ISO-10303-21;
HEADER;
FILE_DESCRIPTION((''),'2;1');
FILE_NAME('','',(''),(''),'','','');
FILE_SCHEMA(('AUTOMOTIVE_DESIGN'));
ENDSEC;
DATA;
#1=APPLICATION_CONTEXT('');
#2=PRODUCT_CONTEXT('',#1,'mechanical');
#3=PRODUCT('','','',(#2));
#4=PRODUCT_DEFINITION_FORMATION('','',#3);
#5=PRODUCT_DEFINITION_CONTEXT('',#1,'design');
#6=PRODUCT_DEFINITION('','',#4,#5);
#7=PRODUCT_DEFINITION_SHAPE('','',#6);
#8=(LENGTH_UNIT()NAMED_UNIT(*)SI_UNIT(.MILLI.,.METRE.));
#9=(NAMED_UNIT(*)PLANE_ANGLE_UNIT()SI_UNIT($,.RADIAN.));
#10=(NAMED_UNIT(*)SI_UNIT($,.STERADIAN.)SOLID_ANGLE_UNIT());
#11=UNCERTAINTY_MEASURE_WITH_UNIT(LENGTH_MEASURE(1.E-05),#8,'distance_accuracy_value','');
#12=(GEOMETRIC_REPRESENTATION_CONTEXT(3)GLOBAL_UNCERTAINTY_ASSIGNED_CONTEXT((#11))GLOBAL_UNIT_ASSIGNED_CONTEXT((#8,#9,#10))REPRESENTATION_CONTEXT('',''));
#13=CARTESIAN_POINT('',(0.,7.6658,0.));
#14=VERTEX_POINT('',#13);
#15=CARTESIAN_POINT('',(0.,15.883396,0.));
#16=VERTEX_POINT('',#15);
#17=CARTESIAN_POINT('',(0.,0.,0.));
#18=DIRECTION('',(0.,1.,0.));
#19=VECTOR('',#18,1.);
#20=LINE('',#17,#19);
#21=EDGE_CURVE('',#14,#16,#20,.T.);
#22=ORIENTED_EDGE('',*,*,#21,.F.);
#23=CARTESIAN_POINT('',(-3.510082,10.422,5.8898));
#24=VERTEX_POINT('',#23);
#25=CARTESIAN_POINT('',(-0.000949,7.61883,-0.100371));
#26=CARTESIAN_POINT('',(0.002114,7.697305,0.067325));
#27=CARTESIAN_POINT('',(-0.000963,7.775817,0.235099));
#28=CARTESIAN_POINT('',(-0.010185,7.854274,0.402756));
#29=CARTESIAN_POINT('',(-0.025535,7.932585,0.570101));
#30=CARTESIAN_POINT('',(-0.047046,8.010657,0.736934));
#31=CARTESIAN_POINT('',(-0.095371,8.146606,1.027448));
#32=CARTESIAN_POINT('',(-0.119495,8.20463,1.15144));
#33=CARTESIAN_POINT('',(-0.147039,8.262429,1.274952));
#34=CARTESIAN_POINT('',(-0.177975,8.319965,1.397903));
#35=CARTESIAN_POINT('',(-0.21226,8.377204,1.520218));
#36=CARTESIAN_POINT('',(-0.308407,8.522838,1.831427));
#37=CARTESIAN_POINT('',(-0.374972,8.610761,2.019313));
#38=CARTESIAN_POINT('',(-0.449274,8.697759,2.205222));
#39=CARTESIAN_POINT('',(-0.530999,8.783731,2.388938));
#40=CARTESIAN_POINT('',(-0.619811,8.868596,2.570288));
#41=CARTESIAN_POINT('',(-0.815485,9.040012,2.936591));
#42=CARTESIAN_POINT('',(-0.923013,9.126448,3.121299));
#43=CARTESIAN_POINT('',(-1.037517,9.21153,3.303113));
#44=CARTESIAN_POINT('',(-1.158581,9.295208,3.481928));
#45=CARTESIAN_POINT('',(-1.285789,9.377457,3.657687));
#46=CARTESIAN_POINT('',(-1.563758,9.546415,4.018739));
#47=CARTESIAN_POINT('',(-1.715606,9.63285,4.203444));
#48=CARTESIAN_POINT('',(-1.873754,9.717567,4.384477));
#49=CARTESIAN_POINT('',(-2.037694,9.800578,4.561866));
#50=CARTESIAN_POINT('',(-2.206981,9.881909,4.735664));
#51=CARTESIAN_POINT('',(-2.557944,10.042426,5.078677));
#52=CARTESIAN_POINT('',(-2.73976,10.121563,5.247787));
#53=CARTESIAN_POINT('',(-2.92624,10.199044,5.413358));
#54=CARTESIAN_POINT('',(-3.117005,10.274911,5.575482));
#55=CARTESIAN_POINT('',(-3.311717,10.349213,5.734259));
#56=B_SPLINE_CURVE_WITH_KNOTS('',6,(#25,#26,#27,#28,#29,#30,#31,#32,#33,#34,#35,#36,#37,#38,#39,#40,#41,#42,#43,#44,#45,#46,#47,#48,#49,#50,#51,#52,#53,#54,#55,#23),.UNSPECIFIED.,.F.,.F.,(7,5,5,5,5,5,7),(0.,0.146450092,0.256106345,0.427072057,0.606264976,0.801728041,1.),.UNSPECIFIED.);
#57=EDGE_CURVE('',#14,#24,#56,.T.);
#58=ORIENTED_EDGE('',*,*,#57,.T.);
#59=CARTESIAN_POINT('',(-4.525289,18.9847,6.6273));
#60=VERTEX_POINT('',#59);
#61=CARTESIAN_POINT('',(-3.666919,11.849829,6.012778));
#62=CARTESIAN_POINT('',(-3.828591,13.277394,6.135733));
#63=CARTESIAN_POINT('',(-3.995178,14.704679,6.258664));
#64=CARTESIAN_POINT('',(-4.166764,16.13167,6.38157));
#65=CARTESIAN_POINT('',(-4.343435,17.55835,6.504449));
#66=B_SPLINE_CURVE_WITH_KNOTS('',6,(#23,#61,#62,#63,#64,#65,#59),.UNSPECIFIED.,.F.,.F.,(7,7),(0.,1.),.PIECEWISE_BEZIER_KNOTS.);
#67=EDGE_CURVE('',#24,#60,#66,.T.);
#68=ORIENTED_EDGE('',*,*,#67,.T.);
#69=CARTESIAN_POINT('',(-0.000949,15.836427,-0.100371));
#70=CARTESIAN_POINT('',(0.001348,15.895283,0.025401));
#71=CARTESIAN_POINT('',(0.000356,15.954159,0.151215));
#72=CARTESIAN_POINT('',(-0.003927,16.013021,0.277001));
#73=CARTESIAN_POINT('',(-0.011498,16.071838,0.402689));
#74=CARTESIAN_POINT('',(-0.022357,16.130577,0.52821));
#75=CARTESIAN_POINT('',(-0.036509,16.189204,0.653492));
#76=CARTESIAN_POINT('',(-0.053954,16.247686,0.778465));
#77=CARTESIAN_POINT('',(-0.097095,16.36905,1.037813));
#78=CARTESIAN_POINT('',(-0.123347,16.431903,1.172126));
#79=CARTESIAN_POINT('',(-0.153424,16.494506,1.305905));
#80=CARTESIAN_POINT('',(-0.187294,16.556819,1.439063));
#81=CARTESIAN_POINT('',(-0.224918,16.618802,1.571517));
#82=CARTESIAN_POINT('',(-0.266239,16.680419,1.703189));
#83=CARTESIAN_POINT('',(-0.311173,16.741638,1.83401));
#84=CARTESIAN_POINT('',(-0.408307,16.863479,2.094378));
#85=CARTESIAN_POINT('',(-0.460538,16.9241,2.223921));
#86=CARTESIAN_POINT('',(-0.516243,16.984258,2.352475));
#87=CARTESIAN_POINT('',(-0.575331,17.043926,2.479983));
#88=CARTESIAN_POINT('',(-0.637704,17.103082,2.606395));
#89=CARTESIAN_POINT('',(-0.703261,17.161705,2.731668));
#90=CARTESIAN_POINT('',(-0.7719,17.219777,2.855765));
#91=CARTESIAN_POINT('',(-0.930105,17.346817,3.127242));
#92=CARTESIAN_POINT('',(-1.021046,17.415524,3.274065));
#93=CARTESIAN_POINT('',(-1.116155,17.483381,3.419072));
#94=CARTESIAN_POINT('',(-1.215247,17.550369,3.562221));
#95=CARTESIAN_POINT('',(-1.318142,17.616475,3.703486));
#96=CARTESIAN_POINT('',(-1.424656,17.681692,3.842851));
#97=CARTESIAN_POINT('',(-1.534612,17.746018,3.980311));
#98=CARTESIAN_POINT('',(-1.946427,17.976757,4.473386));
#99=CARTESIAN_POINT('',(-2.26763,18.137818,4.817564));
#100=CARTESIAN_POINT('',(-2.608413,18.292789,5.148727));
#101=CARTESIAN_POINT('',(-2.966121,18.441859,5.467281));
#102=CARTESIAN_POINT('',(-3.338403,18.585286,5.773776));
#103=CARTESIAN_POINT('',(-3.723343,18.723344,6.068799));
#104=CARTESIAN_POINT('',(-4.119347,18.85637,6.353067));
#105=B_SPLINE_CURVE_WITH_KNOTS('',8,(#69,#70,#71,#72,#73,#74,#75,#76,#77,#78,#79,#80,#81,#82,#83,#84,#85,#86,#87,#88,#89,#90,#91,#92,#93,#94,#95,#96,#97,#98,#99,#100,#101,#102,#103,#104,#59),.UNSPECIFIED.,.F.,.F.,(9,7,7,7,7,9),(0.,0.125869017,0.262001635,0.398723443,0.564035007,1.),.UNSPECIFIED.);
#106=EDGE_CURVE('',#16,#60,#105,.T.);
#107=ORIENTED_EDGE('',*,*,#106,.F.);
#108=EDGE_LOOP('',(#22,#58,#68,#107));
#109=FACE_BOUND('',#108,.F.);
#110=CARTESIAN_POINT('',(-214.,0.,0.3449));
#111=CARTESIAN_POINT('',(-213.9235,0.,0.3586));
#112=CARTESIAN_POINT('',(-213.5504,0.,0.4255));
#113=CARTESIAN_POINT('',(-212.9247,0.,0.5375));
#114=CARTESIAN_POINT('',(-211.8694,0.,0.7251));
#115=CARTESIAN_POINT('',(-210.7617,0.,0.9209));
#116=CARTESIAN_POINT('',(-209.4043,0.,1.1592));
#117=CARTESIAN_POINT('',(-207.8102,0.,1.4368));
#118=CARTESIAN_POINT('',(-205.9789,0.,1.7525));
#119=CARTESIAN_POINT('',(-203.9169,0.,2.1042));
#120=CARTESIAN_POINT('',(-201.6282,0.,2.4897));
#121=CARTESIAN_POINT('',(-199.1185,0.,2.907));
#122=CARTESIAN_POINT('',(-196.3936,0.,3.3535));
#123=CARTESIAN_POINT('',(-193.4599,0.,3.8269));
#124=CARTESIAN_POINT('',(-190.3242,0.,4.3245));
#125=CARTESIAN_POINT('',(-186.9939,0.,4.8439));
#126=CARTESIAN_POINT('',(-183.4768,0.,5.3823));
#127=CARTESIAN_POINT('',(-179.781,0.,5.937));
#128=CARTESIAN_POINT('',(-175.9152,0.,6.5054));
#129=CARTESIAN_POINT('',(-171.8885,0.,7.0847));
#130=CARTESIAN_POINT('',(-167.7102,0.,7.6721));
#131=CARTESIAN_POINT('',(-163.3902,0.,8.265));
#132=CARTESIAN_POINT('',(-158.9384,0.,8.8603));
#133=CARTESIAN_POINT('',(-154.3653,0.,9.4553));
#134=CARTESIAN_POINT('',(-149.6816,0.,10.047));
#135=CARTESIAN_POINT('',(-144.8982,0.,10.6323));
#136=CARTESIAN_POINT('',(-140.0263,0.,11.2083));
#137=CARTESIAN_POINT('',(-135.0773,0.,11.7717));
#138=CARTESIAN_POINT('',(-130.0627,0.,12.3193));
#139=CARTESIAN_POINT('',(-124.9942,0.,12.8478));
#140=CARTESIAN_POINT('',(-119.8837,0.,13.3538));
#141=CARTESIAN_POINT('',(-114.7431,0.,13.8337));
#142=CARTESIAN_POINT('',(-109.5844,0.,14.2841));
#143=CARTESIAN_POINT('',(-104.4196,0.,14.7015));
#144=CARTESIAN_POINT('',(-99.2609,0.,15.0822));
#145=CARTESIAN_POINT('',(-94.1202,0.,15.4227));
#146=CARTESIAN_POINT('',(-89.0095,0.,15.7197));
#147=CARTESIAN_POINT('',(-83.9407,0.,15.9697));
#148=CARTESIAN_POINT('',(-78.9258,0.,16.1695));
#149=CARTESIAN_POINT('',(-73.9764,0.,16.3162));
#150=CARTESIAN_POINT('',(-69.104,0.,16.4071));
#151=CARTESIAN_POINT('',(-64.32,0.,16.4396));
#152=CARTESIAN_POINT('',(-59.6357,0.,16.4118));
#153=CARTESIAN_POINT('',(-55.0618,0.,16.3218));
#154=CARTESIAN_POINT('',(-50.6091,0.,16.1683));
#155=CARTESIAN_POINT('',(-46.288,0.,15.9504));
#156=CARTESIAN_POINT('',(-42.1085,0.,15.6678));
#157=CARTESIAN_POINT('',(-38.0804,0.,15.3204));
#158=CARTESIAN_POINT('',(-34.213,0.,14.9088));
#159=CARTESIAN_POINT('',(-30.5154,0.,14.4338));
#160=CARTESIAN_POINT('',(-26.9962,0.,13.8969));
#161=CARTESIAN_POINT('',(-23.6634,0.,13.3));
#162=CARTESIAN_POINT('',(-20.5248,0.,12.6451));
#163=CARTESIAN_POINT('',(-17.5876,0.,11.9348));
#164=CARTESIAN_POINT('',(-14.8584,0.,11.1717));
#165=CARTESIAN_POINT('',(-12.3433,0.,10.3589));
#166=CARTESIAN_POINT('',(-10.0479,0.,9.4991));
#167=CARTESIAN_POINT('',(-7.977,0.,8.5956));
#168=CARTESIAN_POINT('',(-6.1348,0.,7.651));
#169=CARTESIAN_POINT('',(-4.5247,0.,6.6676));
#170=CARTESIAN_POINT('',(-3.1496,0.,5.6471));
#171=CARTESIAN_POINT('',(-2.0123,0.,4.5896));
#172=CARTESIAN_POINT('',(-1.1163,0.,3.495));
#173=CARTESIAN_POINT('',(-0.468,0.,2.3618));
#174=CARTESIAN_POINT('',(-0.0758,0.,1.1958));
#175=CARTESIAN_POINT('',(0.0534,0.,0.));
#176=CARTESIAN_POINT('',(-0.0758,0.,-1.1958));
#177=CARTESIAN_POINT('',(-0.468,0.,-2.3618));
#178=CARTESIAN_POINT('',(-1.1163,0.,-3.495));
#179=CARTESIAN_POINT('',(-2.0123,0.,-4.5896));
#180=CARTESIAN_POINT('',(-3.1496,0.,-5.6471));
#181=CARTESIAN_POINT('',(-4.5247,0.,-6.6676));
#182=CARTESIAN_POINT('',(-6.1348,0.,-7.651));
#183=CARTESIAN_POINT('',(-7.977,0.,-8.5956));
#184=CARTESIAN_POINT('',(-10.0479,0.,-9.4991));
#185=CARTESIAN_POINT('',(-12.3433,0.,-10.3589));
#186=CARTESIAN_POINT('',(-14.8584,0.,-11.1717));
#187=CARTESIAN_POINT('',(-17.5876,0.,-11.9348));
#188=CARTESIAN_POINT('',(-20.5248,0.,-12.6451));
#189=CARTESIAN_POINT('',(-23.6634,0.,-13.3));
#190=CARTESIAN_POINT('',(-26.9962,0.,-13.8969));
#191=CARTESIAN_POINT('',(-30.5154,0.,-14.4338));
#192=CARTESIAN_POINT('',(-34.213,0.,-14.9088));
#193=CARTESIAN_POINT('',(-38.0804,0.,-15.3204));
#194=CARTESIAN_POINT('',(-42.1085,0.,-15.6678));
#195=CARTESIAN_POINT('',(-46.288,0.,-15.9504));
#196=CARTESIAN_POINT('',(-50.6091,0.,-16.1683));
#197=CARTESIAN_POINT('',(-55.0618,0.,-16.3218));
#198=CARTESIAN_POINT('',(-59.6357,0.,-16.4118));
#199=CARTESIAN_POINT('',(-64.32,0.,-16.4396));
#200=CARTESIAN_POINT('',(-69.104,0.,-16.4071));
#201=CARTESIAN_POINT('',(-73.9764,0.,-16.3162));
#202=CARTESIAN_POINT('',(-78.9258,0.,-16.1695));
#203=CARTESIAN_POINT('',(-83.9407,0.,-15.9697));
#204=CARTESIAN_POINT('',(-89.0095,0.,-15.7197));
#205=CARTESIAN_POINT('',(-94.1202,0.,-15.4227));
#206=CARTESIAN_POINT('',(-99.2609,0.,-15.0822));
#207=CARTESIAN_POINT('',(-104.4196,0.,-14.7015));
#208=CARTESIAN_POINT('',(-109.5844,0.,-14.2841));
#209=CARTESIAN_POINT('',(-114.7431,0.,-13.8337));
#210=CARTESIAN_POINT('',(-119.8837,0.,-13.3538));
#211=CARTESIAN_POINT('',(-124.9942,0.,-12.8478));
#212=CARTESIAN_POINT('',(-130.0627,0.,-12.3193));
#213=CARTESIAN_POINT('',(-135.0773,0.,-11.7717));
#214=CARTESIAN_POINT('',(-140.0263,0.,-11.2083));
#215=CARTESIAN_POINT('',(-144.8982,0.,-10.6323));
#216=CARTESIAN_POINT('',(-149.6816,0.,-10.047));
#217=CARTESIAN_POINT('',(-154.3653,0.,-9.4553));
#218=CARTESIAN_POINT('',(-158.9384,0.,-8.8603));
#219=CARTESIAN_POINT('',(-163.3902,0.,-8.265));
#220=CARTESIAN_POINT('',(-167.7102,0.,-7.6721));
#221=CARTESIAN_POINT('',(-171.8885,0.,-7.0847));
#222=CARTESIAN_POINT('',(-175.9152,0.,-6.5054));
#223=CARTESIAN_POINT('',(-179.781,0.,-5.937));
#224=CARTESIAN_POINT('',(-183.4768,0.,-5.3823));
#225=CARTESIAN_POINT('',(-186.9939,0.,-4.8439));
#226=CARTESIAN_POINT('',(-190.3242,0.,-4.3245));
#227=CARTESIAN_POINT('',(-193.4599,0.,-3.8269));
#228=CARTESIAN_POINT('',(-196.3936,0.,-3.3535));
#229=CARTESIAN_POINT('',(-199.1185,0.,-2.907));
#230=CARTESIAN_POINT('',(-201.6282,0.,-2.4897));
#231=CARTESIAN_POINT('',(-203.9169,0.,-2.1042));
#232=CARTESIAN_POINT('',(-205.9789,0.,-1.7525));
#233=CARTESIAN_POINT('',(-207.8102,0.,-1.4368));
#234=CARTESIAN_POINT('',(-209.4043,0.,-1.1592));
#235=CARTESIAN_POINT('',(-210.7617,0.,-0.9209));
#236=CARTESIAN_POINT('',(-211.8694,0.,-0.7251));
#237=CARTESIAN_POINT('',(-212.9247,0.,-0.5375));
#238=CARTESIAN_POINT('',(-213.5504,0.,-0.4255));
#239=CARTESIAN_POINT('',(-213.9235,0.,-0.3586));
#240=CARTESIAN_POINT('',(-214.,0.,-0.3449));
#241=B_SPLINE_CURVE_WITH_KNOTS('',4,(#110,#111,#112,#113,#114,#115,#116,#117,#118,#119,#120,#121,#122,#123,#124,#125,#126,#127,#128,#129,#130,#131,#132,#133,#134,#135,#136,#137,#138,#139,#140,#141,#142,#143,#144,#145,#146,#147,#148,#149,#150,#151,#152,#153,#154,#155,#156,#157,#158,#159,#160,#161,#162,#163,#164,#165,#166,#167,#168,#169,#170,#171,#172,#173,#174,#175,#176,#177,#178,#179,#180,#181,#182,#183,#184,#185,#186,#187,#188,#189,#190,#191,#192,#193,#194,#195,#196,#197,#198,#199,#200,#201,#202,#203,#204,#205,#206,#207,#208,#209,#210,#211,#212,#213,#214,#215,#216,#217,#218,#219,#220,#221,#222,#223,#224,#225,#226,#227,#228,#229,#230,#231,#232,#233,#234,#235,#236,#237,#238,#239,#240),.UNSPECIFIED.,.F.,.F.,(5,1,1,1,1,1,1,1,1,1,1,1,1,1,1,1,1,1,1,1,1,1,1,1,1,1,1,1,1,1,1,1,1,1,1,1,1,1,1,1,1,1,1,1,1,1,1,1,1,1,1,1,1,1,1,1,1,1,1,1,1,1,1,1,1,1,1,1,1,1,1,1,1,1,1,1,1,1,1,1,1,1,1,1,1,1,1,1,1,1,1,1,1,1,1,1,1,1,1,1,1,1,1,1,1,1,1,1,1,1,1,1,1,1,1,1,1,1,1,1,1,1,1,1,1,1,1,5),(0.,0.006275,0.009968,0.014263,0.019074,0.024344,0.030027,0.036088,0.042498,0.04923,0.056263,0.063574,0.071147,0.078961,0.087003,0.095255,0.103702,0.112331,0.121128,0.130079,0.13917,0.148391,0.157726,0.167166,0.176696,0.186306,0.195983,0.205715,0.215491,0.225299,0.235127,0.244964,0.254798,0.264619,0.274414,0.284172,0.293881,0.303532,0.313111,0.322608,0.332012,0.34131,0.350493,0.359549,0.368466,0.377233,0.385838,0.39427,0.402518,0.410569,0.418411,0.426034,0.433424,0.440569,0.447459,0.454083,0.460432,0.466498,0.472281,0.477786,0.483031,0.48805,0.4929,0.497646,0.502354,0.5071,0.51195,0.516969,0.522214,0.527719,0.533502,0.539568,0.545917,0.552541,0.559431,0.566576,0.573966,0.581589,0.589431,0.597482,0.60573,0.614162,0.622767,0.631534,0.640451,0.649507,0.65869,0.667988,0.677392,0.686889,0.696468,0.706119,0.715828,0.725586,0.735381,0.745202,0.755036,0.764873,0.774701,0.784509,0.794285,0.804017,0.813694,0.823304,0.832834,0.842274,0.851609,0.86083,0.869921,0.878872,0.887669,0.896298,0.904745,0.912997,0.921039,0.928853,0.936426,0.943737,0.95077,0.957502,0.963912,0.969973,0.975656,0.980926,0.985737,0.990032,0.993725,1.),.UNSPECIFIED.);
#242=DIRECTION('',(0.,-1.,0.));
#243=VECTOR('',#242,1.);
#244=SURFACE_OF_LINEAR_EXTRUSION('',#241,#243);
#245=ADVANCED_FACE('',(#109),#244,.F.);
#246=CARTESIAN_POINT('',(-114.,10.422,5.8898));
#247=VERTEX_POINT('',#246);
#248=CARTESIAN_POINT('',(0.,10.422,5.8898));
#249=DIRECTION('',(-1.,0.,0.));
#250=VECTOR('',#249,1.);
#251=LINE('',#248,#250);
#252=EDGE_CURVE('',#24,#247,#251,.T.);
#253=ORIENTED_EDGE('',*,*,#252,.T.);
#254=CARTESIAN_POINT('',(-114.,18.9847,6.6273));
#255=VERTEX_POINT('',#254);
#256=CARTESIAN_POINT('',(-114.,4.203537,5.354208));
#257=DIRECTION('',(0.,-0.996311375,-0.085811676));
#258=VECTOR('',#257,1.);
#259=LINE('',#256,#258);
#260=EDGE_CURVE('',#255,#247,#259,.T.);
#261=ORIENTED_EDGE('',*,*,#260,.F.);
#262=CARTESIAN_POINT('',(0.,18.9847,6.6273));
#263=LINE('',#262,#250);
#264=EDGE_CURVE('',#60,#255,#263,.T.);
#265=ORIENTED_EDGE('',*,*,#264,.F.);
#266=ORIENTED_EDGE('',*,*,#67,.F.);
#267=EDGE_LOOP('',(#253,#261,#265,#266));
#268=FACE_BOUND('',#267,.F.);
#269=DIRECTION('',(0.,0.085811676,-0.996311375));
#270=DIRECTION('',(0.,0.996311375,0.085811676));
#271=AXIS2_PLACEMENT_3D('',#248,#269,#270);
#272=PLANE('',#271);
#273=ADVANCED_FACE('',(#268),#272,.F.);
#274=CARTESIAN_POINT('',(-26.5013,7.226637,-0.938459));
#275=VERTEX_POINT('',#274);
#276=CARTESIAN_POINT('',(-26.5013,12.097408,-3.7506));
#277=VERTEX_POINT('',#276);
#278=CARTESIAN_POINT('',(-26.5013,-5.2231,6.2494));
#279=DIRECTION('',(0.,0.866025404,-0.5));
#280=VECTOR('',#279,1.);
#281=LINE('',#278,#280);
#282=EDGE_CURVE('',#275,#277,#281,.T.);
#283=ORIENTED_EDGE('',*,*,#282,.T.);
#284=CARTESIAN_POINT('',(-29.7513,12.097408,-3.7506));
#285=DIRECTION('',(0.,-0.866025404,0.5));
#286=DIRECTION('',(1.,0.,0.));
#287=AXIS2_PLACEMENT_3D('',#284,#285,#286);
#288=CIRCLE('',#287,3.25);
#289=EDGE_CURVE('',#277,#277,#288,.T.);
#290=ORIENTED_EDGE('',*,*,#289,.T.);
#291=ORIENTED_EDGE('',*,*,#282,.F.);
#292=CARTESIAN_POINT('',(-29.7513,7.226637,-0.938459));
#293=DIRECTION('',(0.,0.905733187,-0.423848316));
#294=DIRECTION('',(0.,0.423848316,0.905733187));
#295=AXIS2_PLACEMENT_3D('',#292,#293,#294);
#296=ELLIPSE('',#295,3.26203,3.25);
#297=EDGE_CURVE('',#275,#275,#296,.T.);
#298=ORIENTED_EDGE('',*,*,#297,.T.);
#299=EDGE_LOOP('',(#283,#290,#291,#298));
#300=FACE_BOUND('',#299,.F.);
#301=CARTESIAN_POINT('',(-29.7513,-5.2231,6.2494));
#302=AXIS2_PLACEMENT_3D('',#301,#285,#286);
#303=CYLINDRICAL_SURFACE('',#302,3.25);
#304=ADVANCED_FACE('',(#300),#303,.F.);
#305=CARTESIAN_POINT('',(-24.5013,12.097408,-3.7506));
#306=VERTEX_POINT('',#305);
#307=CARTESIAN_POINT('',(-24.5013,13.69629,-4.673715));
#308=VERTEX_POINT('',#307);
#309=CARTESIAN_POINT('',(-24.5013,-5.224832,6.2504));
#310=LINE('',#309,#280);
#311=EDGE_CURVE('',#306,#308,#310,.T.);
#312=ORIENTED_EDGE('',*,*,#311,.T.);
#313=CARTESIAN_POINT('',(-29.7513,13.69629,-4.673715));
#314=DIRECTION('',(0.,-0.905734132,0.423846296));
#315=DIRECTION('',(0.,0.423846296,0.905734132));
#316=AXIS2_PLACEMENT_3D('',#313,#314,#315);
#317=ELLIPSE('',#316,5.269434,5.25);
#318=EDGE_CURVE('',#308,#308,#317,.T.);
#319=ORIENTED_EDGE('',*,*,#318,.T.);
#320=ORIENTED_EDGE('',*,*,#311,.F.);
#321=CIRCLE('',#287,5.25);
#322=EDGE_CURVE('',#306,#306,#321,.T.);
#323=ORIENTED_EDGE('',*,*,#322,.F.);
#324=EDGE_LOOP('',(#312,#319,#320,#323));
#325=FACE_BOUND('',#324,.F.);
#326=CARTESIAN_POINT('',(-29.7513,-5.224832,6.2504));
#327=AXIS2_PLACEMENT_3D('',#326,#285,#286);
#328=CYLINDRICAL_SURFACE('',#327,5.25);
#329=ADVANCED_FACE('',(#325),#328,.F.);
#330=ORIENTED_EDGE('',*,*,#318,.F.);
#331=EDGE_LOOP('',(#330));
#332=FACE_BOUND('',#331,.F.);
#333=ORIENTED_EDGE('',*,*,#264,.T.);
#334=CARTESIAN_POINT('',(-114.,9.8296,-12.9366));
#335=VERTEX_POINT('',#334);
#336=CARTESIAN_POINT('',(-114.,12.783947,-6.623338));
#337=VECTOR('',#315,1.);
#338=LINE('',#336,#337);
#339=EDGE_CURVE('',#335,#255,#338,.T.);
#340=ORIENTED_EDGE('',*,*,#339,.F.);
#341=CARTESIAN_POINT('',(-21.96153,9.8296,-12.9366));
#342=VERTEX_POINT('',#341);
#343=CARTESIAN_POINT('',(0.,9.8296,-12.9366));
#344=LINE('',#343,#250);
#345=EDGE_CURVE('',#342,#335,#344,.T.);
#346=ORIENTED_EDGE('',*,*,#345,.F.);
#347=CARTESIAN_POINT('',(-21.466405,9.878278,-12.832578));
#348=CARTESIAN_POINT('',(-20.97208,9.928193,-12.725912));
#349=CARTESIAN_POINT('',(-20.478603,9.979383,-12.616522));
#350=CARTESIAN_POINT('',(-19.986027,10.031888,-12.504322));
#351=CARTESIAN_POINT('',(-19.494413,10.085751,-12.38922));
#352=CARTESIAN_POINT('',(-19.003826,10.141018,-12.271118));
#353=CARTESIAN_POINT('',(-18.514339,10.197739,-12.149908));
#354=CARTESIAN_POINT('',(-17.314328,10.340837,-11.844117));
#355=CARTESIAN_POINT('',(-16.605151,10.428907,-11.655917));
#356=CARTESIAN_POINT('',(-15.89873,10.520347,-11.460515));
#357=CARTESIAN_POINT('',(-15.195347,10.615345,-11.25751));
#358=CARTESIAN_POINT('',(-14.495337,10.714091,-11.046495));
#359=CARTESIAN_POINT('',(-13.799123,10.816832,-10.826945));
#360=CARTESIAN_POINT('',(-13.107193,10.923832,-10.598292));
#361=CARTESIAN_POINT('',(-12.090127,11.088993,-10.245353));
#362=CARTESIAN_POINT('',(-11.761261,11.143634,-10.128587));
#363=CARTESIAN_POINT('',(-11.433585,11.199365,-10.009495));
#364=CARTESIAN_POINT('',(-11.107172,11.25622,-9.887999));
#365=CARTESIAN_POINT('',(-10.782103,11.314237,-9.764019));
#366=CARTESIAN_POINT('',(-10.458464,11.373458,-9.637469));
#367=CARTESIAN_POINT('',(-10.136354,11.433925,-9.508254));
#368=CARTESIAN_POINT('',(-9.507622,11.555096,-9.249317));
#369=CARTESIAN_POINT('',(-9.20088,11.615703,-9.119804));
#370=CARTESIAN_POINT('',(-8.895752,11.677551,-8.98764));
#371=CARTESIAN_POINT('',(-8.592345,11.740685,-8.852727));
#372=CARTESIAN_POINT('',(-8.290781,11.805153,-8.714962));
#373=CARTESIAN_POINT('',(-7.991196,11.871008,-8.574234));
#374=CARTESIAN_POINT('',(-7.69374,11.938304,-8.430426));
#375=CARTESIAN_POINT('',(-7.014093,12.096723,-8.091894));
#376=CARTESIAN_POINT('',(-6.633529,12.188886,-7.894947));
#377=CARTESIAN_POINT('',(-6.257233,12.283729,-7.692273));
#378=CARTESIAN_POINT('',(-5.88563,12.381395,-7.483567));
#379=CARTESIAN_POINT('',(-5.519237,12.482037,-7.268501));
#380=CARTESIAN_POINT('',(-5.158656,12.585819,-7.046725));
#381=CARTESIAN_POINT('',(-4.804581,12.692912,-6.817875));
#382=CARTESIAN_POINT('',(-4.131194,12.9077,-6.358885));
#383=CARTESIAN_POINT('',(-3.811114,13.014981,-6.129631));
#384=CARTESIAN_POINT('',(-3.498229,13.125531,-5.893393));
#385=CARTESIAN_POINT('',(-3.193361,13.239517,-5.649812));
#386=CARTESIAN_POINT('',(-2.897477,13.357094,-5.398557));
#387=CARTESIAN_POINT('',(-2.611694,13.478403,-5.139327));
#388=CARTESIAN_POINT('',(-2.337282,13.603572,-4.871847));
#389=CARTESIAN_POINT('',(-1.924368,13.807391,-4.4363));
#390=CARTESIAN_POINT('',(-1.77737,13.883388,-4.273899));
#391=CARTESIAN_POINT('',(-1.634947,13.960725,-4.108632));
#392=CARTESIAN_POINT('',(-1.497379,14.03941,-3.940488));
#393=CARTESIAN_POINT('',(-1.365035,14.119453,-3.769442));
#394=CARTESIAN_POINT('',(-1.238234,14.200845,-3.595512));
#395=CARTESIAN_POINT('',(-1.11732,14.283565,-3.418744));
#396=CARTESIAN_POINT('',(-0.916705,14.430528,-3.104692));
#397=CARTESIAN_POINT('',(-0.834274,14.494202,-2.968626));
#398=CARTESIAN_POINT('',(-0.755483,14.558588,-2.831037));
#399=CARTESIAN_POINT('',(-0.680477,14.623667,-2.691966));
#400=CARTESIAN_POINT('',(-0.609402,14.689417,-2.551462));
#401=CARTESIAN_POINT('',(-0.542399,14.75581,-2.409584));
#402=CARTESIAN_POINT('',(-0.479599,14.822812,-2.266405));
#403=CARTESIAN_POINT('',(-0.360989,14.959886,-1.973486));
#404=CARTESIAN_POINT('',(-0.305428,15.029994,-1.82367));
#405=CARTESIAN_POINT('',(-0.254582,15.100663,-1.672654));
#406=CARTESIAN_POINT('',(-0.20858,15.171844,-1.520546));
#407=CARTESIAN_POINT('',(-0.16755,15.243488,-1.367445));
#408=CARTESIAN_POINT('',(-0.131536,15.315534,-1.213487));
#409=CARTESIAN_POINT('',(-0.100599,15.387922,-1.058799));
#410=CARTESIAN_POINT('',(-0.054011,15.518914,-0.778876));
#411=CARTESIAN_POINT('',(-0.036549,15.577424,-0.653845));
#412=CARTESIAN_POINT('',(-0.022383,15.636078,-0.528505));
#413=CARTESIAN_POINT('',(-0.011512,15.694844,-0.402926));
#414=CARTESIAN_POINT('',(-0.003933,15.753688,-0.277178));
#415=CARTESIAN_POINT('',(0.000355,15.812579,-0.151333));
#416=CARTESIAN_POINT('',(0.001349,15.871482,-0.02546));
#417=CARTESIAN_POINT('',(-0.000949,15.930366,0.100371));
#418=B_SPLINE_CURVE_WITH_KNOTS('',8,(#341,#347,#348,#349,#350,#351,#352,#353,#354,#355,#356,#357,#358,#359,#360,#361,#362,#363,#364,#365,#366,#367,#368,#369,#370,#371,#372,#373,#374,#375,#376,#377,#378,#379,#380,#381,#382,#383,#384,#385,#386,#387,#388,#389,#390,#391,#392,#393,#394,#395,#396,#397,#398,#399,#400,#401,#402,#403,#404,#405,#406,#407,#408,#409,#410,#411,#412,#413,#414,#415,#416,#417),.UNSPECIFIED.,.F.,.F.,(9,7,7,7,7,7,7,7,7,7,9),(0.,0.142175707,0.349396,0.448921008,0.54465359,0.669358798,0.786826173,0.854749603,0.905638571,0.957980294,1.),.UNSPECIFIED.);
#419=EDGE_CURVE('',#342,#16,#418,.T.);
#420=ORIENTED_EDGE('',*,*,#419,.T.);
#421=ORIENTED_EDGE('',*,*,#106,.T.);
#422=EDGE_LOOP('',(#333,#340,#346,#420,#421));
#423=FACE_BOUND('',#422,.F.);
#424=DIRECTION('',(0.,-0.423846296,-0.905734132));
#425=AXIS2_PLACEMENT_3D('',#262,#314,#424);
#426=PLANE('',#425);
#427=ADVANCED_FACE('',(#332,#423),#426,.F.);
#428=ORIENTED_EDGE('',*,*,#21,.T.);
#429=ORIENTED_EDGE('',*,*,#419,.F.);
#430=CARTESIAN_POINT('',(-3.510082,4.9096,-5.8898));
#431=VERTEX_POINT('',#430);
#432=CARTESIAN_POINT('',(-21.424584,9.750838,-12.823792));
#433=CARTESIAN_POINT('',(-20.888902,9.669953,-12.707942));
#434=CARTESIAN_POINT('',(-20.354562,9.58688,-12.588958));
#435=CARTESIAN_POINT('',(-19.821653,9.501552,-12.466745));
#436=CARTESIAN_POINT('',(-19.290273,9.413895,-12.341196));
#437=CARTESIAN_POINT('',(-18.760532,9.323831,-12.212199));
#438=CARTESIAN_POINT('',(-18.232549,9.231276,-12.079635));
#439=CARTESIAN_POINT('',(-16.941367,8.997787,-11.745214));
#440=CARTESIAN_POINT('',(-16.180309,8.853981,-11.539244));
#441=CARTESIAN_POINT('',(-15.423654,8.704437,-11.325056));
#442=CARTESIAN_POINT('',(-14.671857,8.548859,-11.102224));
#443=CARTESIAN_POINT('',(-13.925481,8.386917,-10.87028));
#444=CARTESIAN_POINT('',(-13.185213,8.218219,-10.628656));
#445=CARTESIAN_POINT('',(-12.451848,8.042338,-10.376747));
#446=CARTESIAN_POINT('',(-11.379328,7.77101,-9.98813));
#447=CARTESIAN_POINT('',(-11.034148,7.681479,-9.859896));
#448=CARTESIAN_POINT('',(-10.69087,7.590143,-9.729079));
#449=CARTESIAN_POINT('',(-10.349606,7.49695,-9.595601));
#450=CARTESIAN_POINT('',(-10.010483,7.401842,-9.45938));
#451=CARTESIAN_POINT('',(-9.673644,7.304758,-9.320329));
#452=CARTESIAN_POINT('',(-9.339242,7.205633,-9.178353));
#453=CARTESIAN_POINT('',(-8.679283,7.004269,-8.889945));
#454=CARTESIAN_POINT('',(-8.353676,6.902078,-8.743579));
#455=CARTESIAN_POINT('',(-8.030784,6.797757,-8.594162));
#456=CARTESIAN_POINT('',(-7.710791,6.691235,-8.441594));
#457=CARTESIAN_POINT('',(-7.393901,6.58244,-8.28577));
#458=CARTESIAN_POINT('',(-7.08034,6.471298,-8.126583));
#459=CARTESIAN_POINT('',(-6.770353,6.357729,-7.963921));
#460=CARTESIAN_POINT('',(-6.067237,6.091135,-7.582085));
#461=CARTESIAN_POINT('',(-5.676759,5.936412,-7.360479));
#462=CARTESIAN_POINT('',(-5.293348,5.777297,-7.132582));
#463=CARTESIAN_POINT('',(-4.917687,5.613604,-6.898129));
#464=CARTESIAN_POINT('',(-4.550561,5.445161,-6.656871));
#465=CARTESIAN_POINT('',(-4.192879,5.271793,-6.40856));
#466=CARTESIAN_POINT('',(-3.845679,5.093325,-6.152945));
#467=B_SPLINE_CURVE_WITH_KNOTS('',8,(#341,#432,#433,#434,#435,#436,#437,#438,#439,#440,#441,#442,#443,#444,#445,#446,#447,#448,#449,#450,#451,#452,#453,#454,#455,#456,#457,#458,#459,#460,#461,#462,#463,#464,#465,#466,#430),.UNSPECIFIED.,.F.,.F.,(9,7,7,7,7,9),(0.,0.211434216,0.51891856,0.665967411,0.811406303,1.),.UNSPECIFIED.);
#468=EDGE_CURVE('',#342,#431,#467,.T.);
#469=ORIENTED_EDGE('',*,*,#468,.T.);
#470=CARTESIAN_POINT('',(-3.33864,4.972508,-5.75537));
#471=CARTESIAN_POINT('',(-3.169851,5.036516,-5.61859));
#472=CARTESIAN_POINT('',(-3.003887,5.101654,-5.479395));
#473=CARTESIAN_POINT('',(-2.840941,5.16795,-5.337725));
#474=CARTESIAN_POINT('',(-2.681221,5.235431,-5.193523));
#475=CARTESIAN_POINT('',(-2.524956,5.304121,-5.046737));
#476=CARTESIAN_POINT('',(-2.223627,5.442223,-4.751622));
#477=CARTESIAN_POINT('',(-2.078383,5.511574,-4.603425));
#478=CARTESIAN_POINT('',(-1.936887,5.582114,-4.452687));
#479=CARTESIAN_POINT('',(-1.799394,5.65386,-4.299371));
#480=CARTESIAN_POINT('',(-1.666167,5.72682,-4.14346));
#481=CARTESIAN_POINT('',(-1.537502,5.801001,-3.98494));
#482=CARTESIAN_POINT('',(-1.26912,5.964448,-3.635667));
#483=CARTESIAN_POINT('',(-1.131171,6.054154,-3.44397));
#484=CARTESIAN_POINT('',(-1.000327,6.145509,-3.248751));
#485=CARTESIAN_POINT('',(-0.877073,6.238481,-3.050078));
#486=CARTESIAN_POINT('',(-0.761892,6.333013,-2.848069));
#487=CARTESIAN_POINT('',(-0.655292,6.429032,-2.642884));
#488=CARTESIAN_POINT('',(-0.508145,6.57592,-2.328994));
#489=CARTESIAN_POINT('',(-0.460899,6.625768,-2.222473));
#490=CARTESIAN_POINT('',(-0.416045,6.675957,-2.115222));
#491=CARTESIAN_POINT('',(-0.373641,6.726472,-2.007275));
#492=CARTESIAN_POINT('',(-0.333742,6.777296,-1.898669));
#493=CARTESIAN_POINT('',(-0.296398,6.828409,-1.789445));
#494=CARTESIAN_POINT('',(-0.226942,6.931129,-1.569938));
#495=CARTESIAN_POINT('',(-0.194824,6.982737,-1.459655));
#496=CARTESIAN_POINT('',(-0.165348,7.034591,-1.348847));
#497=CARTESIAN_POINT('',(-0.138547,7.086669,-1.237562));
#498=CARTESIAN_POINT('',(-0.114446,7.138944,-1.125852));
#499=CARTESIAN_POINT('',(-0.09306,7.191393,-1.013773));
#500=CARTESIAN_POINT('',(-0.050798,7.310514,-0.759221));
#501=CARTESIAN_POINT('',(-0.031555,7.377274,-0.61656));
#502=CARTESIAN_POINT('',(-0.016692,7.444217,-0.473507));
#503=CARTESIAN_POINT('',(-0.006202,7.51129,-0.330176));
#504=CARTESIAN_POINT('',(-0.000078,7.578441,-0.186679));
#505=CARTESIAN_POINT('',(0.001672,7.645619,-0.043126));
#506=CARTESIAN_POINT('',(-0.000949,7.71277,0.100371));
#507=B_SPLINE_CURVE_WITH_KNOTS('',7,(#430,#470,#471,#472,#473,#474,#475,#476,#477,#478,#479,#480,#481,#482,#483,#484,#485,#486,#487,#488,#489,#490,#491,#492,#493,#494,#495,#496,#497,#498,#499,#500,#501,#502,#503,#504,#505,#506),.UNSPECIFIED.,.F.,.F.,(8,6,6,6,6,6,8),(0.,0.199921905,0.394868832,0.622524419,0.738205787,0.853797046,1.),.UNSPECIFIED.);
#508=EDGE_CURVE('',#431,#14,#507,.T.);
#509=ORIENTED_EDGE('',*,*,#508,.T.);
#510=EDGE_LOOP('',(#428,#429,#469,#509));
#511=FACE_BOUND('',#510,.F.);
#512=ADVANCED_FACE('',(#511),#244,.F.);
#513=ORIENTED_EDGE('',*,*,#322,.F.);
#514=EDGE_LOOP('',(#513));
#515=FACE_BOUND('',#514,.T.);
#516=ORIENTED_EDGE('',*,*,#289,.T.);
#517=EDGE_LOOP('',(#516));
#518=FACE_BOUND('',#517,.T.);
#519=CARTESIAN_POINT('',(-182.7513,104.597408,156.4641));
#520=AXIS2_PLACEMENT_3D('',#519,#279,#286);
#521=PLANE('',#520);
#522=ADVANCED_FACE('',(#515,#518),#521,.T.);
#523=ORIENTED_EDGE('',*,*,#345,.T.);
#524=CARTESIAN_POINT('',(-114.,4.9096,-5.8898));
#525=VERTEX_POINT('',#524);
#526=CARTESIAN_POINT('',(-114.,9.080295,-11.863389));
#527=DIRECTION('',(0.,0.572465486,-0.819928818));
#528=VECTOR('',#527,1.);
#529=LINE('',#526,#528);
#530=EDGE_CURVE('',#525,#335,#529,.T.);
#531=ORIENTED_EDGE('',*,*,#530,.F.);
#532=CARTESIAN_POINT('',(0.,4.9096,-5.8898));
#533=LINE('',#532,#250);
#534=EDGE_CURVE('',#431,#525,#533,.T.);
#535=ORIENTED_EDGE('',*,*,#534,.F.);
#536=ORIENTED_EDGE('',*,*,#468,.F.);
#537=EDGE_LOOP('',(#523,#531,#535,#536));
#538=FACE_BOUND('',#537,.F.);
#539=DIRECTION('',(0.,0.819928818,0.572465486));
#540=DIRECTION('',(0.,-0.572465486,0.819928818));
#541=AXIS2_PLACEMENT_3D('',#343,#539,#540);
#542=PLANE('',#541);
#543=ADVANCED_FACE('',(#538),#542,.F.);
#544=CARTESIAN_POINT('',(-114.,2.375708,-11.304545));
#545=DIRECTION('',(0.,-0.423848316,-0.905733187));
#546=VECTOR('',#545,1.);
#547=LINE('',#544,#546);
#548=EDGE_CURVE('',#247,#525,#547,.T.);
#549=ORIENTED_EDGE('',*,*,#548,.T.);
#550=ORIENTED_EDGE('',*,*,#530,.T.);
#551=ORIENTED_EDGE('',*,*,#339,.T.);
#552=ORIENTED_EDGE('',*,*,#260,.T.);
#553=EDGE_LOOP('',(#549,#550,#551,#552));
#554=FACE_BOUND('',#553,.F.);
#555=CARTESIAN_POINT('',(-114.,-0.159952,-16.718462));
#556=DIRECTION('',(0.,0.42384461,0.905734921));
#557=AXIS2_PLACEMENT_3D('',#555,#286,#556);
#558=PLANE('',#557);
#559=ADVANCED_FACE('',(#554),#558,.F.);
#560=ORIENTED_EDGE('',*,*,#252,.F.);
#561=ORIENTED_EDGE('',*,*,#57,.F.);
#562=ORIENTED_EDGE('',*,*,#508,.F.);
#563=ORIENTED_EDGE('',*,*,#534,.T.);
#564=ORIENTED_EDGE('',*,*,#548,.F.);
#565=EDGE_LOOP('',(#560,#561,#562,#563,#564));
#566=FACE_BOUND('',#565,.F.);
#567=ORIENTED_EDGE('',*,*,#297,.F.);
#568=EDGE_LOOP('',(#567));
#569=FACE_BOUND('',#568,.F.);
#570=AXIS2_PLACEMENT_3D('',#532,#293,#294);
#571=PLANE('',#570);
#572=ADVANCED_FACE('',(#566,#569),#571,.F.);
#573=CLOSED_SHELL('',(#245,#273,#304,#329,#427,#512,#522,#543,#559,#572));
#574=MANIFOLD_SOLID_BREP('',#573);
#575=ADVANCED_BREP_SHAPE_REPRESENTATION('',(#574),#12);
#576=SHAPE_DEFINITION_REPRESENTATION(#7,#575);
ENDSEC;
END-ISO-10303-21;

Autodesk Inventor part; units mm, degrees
sketch "Sketch5" plane through (0, 0, 0) normal (0, 1, 0) x (-1, 0, 0)
  spline S0 degree 4 poles (214, 0.3449) (213.9235, 0.3586) (213.5504, 0.4255) (212.9247, 0.5375) (211.8694, 0.7251) (210.7617, 0.9209) (209.4043, 1.1592) (207.8102, 1.4368) (205.9789, 1.7525) (203.9169, 2.1042) (201.6282, 2.4897) (199.1185, 2.907) (196.3936, 3.3535) (193.4599, 3.8269) (190.3242, 4.3245) (186.9939, 4.8439) (183.4768, 5.3823) (179.781, 5.937) (175.9152, 6.5054) (171.8885, 7.0847) (167.7102, 7.6721) (163.3902, 8.265) (158.9384, 8.8603) (154.3653, 9.4553) (149.6816, 10.047) (144.8982, 10.6323) (140.0263, 11.2083) (135.0773, 11.7717) (130.0627, 12.3193) (124.9942, 12.8478) (119.8837, 13.3538) (114.7431, 13.8337) (109.5844, 14.2841) (104.4196, 14.7015) (99.2609, 15.0822) (94.1202, 15.4227) (89.0095, 15.7197) (83.9407, 15.9697) (78.9258, 16.1695) (73.9764, 16.3162) (69.104, 16.4071) (64.32, 16.4396) (59.6357, 16.4118) (55.0618, 16.3218) (50.6091, 16.1683) (46.288, 15.9504) (42.1085, 15.6678) (38.0804, 15.3204) (34.213, 14.9088) (30.5154, 14.4338) (26.9962, 13.8969) (23.6634, 13.3) (20.5248, 12.6451) (17.5876, 11.9348) (14.8584, 11.1717) (12.3433, 10.3589) (10.0479, 9.4991) (7.977, 8.5956) (6.1348, 7.651) (4.5247, 6.6676) (3.1496, 5.6471) (2.0123, 4.5896) (1.1163, 3.495) (0.468, 2.3618) (0.0758, 1.1958) (-0.0534, 0) (0.0758, -1.1958) (0.468, -2.3618) (1.1163, -3.495) (2.0123, -4.5896) (3.1496, -5.6471) (4.5247, -6.6676) (6.1348, -7.651) (7.977, -8.5956) (10.0479, -9.4991) (12.3433, -10.3589) (14.8584, -11.1717) (17.5876, -11.9348) (20.5248, -12.6451) (23.6634, -13.3) (26.9962, -13.8969) (30.5154, -14.4338) (34.213, -14.9088) (38.0804, -15.3204) (42.1085, -15.6678) (46.288, -15.9504) (50.6091, -16.1683) (55.0618, -16.3218) (59.6357, -16.4118) (64.32, -16.4396) (69.104, -16.4071) (73.9764, -16.3162) (78.9258, -16.1695) (83.9407, -15.9697) (89.0095, -15.7197) (94.1202, -15.4227) (99.2609, -15.0822) (104.4196, -14.7015) (109.5844, -14.2841) (114.7431, -13.8337) (119.8837, -13.3538) (124.9942, -12.8478) (130.0627, -12.3193) (135.0773, -11.7717) (140.0263, -11.2083) (144.8982, -10.6323) (149.6816, -10.047) (154.3653, -9.4553) (158.9384, -8.8603) (163.3902, -8.265) (167.7102, -7.6721) (171.8885, -7.0847) (175.9152, -6.5054) (179.781, -5.937) (183.4768, -5.3823) (186.9939, -4.8439) (190.3242, -4.3245) (193.4599, -3.8269) (196.3936, -3.3535) (199.1185, -2.907) (201.6282, -2.4897) (203.9169, -2.1042) (205.9789, -1.7525) (207.8102, -1.4368) (209.4043, -1.1592) (210.7617, -0.9209) (211.8694, -0.7251) (212.9247, -0.5375) (213.5504, -0.4255) (213.9235, -0.3586) (214, -0.3449) knots 0 0 0 0 0 0.006275 0.009968 0.014263 0.019074 0.024344 0.030027 0.036088 0.042498 0.04923 0.056263 0.063574 0.071147 0.078961 0.087003 0.095255 0.103702 0.112331 0.121128 0.130079 0.13917 0.148391 0.157726 0.167166 0.176696 0.186306 0.195983 0.205715 0.215491 0.225299 0.235127 0.244964 0.254798 0.264619 0.274414 0.284172 0.293881 0.303532 0.313111 0.322608 0.332012 0.34131 0.350493 0.359549 0.368466 0.377233 0.385838 0.39427 0.402518 0.410569 0.418411 0.426034 0.433424 0.440569 0.447459 0.454083 0.460432 0.466498 0.472281 0.477786 0.483031 0.48805 0.4929 0.497646 0.502354 0.5071 0.51195 0.516969 0.522214 0.527719 0.533502 0.539568 0.545917 0.552541 0.559431 0.566576 0.573966 0.581589 0.589431 0.597482 0.60573 0.614162 0.622767 0.631534 0.640451 0.649507 0.65869 0.667988 0.677392 0.686889 0.696468 0.706119 0.715828 0.725586 0.735381 0.745202 0.755036 0.764873 0.774701 0.784509 0.794285 0.804017 0.813694 0.823304 0.832834 0.842274 0.851609 0.86083 0.869921 0.878872 0.887669 0.896298 0.904745 0.912997 0.921039 0.928853 0.936426 0.943737 0.95077 0.957502 0.963912 0.969973 0.975656 0.980926 0.985737 0.990032 0.993725 1 1 1 1 1
  line L0 (204.525, -2) -> (204.525, 2)
  line L1 (204.525, 0) -> (0, 0)
  line L2 (0, 0) -> (61.2, 0)
  line L3 (61.2, 0) -> (61.2, -16.415)
  line L4 (61.2, -16.415) -> (61.2, 16.415)
  point P0 (0, 0)
  point P1 (213.875, 0.3673)
  point P2 (213.5005, 0.4344)
  point P3 (212.8772, 0.5457)
  point P4 (212.0066, 0.7006)
  point P5 (210.8908, 0.8979)
  point P6 (209.5323, 1.1364)
  point P7 (207.9344, 1.4146)
  point P8 (206.1007, 1.7309)
  point P9 (204.0356, 2.0831)
  point P10 (201.7438, 2.4693)
  point P11 (199.2308, 2.8872)
  point P12 (196.5023, 3.3344)
  point P13 (193.5648, 3.8084)
  point P14 (190.4252, 4.3068)
  point P15 (187.0907, 4.8269)
  point P16 (183.5691, 5.366)
  point P17 (179.8687, 5.9215)
  point P18 (175.9981, 6.4907)
  point P19 (171.9664, 7.0708)
  point P20 (167.7829, 7.6591)
  point P21 (163.4575, 8.2526)
  point P22 (159.0002, 8.8488)
  point P23 (154.4215, 9.4444)
  point P24 (149.732, 10.0368)
  point P25 (144.9427, 10.6228)
  point P26 (140.0648, 11.1993)
  point P27 (135.1097, 11.7633)
  point P28 (130.0889, 12.3114)
  point P29 (125.0142, 12.8402)
  point P30 (119.8974, 13.3464)
  point P31 (114.7505, 13.8266)
  point P32 (109.5855, 14.2771)
  point P33 (104.4145, 14.6943)
  point P34 (99.2495, 15.0749)
  point P35 (94.1026, 15.4151)
  point P36 (88.9858, 15.7116)
  point P37 (83.9111, 15.961)
  point P38 (78.8903, 16.1601)
  point P39 (73.9352, 16.306)
  point P40 (69.0573, 16.3958)
  point P41 (64.268, 16.4271)
  point P42 (59.5785, 16.3978)
  point P43 (54.9998, 16.3062)
  point P44 (50.5425, 16.1509)
  point P45 (46.2171, 15.931)
  point P46 (42.0336, 15.6461)
  point P47 (38.0019, 15.2962)
  point P48 (34.1313, 14.8818)
  point P49 (30.4309, 14.4038)
  point P50 (26.9093, 13.8636)
  point P51 (23.5748, 13.2629)
  point P52 (20.4352, 12.6039)
  point P53 (17.4977, 11.889)
  point P54 (14.7693, 11.1209)
  point P55 (12.2562, 10.3027)
  point P56 (9.9644, 9.4372)
  point P57 (7.8993, 8.5276)
  point P58 (6.0656, 7.5769)
  point P59 (4.4677, 6.5883)
  point P60 (3.1092, 5.5644)
  point P61 (1.9934, 4.5081)
  point P62 (1.1228, 3.4216)
  point P63 (0.4995, 2.307)
  point P64 (0.125, 1.1661)
  point P65 (0.125, -1.1661)
  point P66 (0.4995, -2.307)
  point P67 (1.1228, -3.4216)
  point P68 (1.9934, -4.5081)
  point P69 (3.1092, -5.5644)
  point P70 (4.4677, -6.5883)
  point P71 (6.0656, -7.5769)
  point P72 (7.8993, -8.5276)
  point P73 (9.9644, -9.4372)
  point P74 (12.2562, -10.3027)
  point P75 (14.7693, -11.1209)
  point P76 (17.4977, -11.889)
  point P77 (20.4352, -12.6039)
  point P78 (23.5748, -13.2629)
  point P79 (26.9093, -13.8636)
  point P80 (30.4309, -14.4038)
  point P81 (34.1313, -14.8818)
  point P82 (38.0019, -15.2962)
  point P83 (42.0336, -15.6461)
  point P84 (46.2171, -15.931)
  point P85 (50.5425, -16.1509)
  point P86 (54.9998, -16.3062)
  point P87 (59.5785, -16.3978)
  point P88 (64.268, -16.4271)
  point P89 (69.0573, -16.3958)
  point P90 (73.9352, -16.306)
  point P91 (78.8903, -16.1601)
  point P92 (83.9111, -15.961)
  point P93 (88.9858, -15.7116)
  point P94 (94.1026, -15.4151)
  point P95 (99.2495, -15.0749)
  point P96 (104.4145, -14.6943)
  point P97 (109.5855, -14.2771)
  point P98 (114.7505, -13.8266)
  point P99 (119.8974, -13.3464)
  point P100 (125.0142, -12.8402)
  point P101 (130.0889, -12.3114)
  point P102 (135.1097, -11.7633)
  point P103 (140.0648, -11.1993)
  point P104 (144.9427, -10.6228)
  point P105 (149.732, -10.0368)
  point P106 (154.4215, -9.4444)
  point P107 (159.0002, -8.8488)
  point P108 (163.4575, -8.2526)
  point P109 (167.7829, -7.6591)
  point P110 (171.9664, -7.0708)
  point P111 (175.9981, -6.4907)
  point P112 (179.8687, -5.9215)
  point P113 (183.5691, -5.366)
  point P114 (187.0907, -4.8269)
  point P115 (190.4252, -4.3068)
  point P116 (193.5648, -3.8084)
  point P117 (196.5023, -3.3344)
  point P118 (199.2308, -2.8872)
  point P119 (201.7438, -2.4693)
  point P120 (204.0356, -2.0831)
  point P121 (206.1007, -1.7309)
  point P122 (207.9344, -1.4146)
  point P123 (209.5323, -1.1364)
  point P124 (210.8908, -0.8979)
  point P125 (212.0066, -0.7006)
  point P126 (212.8772, -0.5457)
  point P127 (213.5005, -0.4344)
  point P128 (213.875, -0.3673)
  dimension "d28" = 204.525
  dimension "d29" = 61.2
  dimension "d30" = 32.8299
extrude "Main Wing" add sketch "Sketch5" along normal blind 453.491
sketch "Sketch6" plane through (-204.525, 0, 2) normal (-1, 0, 0) x (0, 0, 1)
  line L0 (0, 0) -> (0, 66.548)
  line L1 (0, 453.4889) -> (0, 366.5701)
  line L2 (20, 366.5701) -> (-20, 366.5701)
  line L3 (-20, 66.548) -> (20, 66.548)
  line L4 (20, 66.548) -> (20, 366.5701)
  line L5 (-20, 366.5701) -> (-20, 66.548)
  point P0 (-2, 0)
  dimension "d31" = 66.548
  dimension "d32" = 86.9188
  dimension "d33" = 40
  dimension "d34" = 40
  dimension "d43" = 300.0221
extrude "Rectangle Elevron Gap" cut sketch "Sketch6" against normal blind 69.6214
sketch "Sketch7" plane through (-204.525, 66.548, 2) normal (0, 1, 0) x (1, 0, 0)
  line L0 (69.6201, 13.7865) -> (69.6201, -9.7851)
  line L1 (69.6201, -9.7851) -> (69.6201, 2.0009)
  circle A0 centre (69.6201, 2.0009) radius 17
  circle A1 centre (69.6201, 2.0009) radius 1.7526
  point P0 (204.525, 2)
  point P1 (69.6201, 3.7535)
  point P2 (69.6201, 0.2483)
  dimension "d37" = 23.5717
  dimension "d38" = 11.786
  dimension "d41" = 34
  dimension "d42" = 3.5052
extrude "Circle Elevron Gap" cut sketch "Sketch7" along normal blind 300.0221 contours A1 L0 | A0 picked at (69.7501, 0.8471)
sketch "Sketch8" plane through (0, 453.491, 0) normal (0, 1, 0) x (1, 0, 0)
  line L0 (-204.5238, 0) -> (-143.0304, 0)
  circle A0 centre (-143.0304, 0) radius 1.7526
  point P0 (0, 0)
  dimension "d46" = 61.4934
  dimension "d47" = 3.5052
extrude "Elevron Screw Hole" cut sketch "Sketch8" against normal blind 454.0221
ref_plane "Leading Edge Plane" through (0, 226.7455, 0) normal (-1, 0, 0) x (0, 0, 1)
sketch "Sketch9" plane through (0, 226.7455, 0) normal (-1, 0, 0) x (0, 0, 1)
  line L0 (0, -226.7455) -> (0, 226.7401)
  line L1 (0, 226.7401) -> (0, 213.1781)
  line L2 (0, 213.1781) -> (0, 194.4281)
  circle A0 centre (0, 194.4281) radius 18.75
  line L3 (-14.0018, 198.1799) -> (3.7518, 208.4299)
  line L4 (3.7518, 208.4299) -> (14.0018, 190.6764)
  line L5 (14.0018, 190.6764) -> (-3.7518, 180.4264)
  line L6 (-3.7518, 180.4264) -> (-14.0018, 198.1799)
  line L7 (-14.0018, 198.1799) -> (14.0018, 190.6764) construction
  line L8 (3.7518, 208.4299) -> (-3.7518, 180.4264) construction
  circle A1 centre (0, 194.4281) radius 15.5
  dimension "d50" = 13.562
  dimension "d51" = 18.75
  dimension "d52" = 37.5
  dimension "d55" = 20.5
  dimension "d56" = 20.5
  dimension "d70" = 31
extrude "Circle thingy for boom" add sketch "Sketch9" along normal blind 204.5 contours A1 L0 L3 L6 L5 | L0 L5 L4 L3 A1 | L5 L6 L3 L0 | L0 L3 L4 L5
sketch "Sketch10" plane through (0, 226.7455, 0) normal (1, 0, 0) x (0, 0, -1)
  line L0 (0, 213.1791) -> (0, 194.4291)
  line L1 (13.6215, 199.3869) -> (-4.9578, 208.0506)
  line L2 (-4.9578, 208.0506) -> (-13.6215, 189.4713)
  line L3 (-13.6215, 189.4713) -> (4.9578, 180.8076)
  line L4 (4.9578, 180.8076) -> (13.6215, 199.3869)
  line L5 (13.6215, 199.3869) -> (-13.6215, 189.4713) construction
  line L6 (-4.9578, 208.0506) -> (4.9578, 180.8076) construction
  point P0 (0, -226.7455)
  dimension "d57" = 18.75
  dimension "d58" = 20.5
  dimension "d59" = 20.5
extrude "20x20 hole for boom" cut sketch "Sketch10" against normal blind 205.5
ref_plane "Plane of Pain" through (-204.525, 0, -17) normal (0, 0, 1) x (0, 1, 0)
ref_plane "Work Plane5" through (-204.525, 0, -2) normal (0, 0, 1) x (0, 1, 0)
sketch "Sketch11" plane through (-204.525, 0, -17) normal (0, 0, 1) x (0, 1, 0)
  line L0 (453.4842, 0.0013) -> (403.4842, 0.0013)
  line L1 (403.4842, 0.0013) -> (404.7122, -149.9936)
  circle A0 centre (404.7122, -149.9936) radius 5.25
  line L2 (404.7122, -149.9936) -> (219.7122, -149.9936)
  circle A1 centre (219.7122, -149.9936) radius 5.25
  line L3 (366.5707, -80.63) -> (219.7122, -80.63)
  line L4 (219.7122, -80.63) -> (219.7122, -149.9936)
  point P0 (0, -204.525)
  dimension "d64" = 50
  dimension "d65" = 150
  dimension "d66" = 10.5
  dimension "d67" = 185
  dimension "d121" = 146.8585
  dimension "d122" = 69.3637
ref_plane "20x20 Plane" through (0, 416.8428, -9.2897) normal (0, 0.4226183, 0.9063078) x (1, 0, 0)
sketch "Sketch12" plane through (0, 416.8428, -9.2897) normal (0, 0.4226183, 0.9063078) x (1, 0, 0)
  line L0 (0, 10.2503) -> (0, 0.0003)
  line L1 (0, 0.0003) -> (-55, 0.0003)
  circle A0 centre (-55, 0.0003) radius 5.25
  circle A1 centre (-55, 0.0003) radius 2.75
  point P0 (0, -381.7138)
  dimension "d71" = 10.25
  dimension "d72" = 55
  dimension "d73" = 10.5
  dimension "d74" = 5.5
sketch "Sketch13" plane through (0, 416.8428, -9.2897) normal (0, 0.4226183, 0.9063078) x (1, 0, 0)
  circle A0 centre (-55, 0) radius 5.25
  circle A1 centre (-55, 0) radius 2.75
  point P0 (0, -381.7138)
  dimension "d77" = 10.5
  dimension "d82" = 5.5
extrude "Boom Screw Head" cut sketch "Sketch13" against normal blind 13.75 contours A0 | A1
extrude "Boom Screw Hole" add sketch "Sketch12" against normal blind 3
sketch "Sketch14" plane through (-204.525, 366.5701, -2) normal (0, -1, 0) x (1, 0, 0)
  line L0 (61.5404, 3.7631) -> (61.5404, 7.2141)
  line L1 (61.5404, 7.2141) -> (43.5474, 7.2141)
  line L2 (61.5404, 7.2141) -> (69.3184, 7.2141)
  line L3 (43.5474, 7.2141) -> (43.5474, -10.2859)
  line L4 (69.3184, 7.2141) -> (69.3184, -10.2859)
  line L5 (43.5474, -10.2859) -> (69.3184, -10.2859)
  point P0 (204.525, 2)
  dimension "d89" = 3.451
  dimension "d90" = 17.993
  dimension "d91" = 7.778
  dimension "d93" = 17.5
  dimension "d94" = 17.5
extrude "Servo Hole" cut sketch "Sketch14" against normal blind 28.763
sketch "Sketch15" plane through (-135.2066, 366.5701, -11.7525) normal (-1, 0, 0) x (0, 0, 1)
  line L0 (17, 0) -> (17, 6)
  line L1 (17, 6) -> (17, 8)
  line L2 (17, 8) -> (-3, 8)
  line L3 (-3, 8) -> (-3, 6)
  line L4 (-3, 6) -> (17, 6)
  point P0 (11.7525, -366.5701)
  dimension "d97" = 6
  dimension "d98" = 2
  dimension "d99" = 2
extrude "Servo Sidewall 1" cut sketch "Sketch15" against normal blind 2.782
sketch "Sketch16" plane through (-160.9776, 366.5701, 5.2141) normal (1, 0, 0) x (0, 0, -1)
  line L0 (0, 0) -> (0, 6)
  line L1 (0, 6) -> (0, 8)
  line L2 (0, 8) -> (14, 8)
  line L3 (14, 8) -> (14, 6)
  line L4 (14, 6) -> (0, 6)
  point P0 (5.2141, -366.5701)
  dimension "d102" = 6
  dimension "d103" = 2
extrude "Servo Sidewall 2" cut sketch "Sketch16" against normal blind 2.782
sketch "Sketch17" plane through (-135.2066, 366.5701, 5.2141) normal (0, 0, -1) x (-1, 0, 0)
  line L0 (0, 8) -> (0, 16.3)
  line L1 (0, 28.7478) -> (0, 23.2698)
  line L2 (0, 16.3) -> (-27.1565, 48.6638)
  line L3 (0, 23.2698) -> (-27.1565, 55.6336)
  line L4 (-27.1565, 48.6638) -> (-27.1565, 55.6336)
  line L5 (0, 23.2698) -> (0, 16.3)
  point P0 (-135.2066, -366.5701)
  point P1 (0, 23.2698)
  dimension "d106" = 8.3
  dimension "d107" = 5.478
  dimension "d108" = 42.248
  dimension "d109" = 42.248
extrude "some slant hole" cut sketch "Sketch17" along normal blind 23.75
fillet "Fillet for slant" radius 7.7 2 edges at (-135.2066, 382.8701, -3.2692) (-135.2066, 389.8399, -3.2692)
sketch "Sketch18" plane through (-204.525, 0, -17) normal (0, 0, 1) x (0, 1, 0)
  circle A0 centre (219.7124, -149.9979) radius 3.25
  point P0 (0, -204.525)
  dimension "d113" = 6.5
extrude "Screwhead for something" cut sketch "Sketch11" along normal blind 5.25 contours A1 L4 L2 | L2 L4 A1
extrude "screwhole for thingy" cut sketch "Sketch18" along normal blind 41.75
ref_plane "Work Plane10" through (-182.7513, 87.2769, 166.4641) normal (0, 0.8660254, -0.5) x (1, 0, 0)
ref_plane "Work Plane9" through (-182.7513, 366.5701, 5.2141) normal (0, 0.8660254, -0.5) x (1, 0, 0)
ref_plane "Bottom of Airfoil" through (-204.525, 0, 16.5) normal (0, 0, 1) x (0, 1, 0)
sketch "Sketch21" plane through (-204.525, 0, 16.5) normal (0, 0, 1) x (0, 1, 0)
  line L0 (366.5707, -80.6294) -> (219.7127, -80.6294)
  line L1 (219.7127, -80.6294) -> (219.7127, -149.9934)
  line L2 (219.7127, -149.9934) -> (214.6627, -149.9934)
  line L3 (214.6627, -147.0779) -> (214.6627, -152.9089)
  line L4 (214.6627, -147.0779) -> (219.7125, -144.1624)
  line L5 (219.7125, -144.1624) -> (224.7623, -147.0779)
  line L6 (224.7623, -147.0779) -> (224.7623, -152.9089)
  line L7 (224.7623, -152.9089) -> (219.7125, -155.8244)
  line L8 (214.6627, -152.9089) -> (219.7125, -155.8244)
  point P0 (0, -204.525)
  point P1 (224.7623, -147.0779)
  dimension "d123" = 146.858
  dimension "d124" = 69.364
  dimension "d125" = 5.05
  dimension "d126" = 5.831
  dimension "d127" = 5.831
  dimension "d128" = 5.831
  dimension "d129" = 5.831
  dimension "d130" = 5.831
extrude "Hexagon Hole of Doom" cut sketch "Sketch21" against normal blind 4
sketch "Sketch22" plane through (-182.7513, 87.2769, 166.4641) normal (0, 0.8660254, -0.5) x (1, 0, 0)
  line L0 (138, 200) -> (153, 200)
  line L1 (153, 200) -> (153, 185)
  circle A0 centre (153, 185) radius 5.25
  line L2 (153, 185) -> (61.5, 185)
  circle A1 centre (61.5, 185) radius 5.25
  point P0 (182.7513, 187.8006)
  dimension "d137" = 15
  dimension "d138" = 15
  dimension "d139" = 10.5
  dimension "d140" = 91.5
  dimension "d141" = 10.5
extrude "Extrusion23" cut sketch "Sketch22" along normal blind 68.25
sketch "Sketch23" plane through (-182.7513, 87.2769, 166.4641) normal (0, 0.8660254, -0.5) x (1, 0, 0)
  line L0 (138, 200) -> (153, 200)
  line L1 (153, 200) -> (153, 185)
  line L2 (153, 185) -> (61.5, 185)
  circle A0 centre (153, 185) radius 5.25
  circle A1 centre (153, 185) radius 3.25
  circle A2 centre (61.5, 185) radius 5.25
  circle A3 centre (61.5, 185) radius 3.25
  point P0 (182.7513, 187.8006)
  dimension "d144" = 15
  dimension "d145" = 15
  dimension "d146" = 91.5
  dimension "d147" = 10.5
  dimension "d148" = 6.5
  dimension "d149" = 10.5
  dimension "d150" = 6.5
extrude "Extrusion24" add sketch "Sketch23" along normal blind 20 contours A0 L2 A1 L1 | L1 A1 L2 A0 | A2
sketch "Sketch24" plane through (0, 0, 0) normal (0, -1, 0) x (1, 0, 0)
  line L0 (0, -15) -> (-205, -15)
  line L1 (-205, -15) -> (-205, 16)
  line L2 (-205, 16) -> (0, 16)
  line L3 (0, 16) -> (0, -15)
  point P0 (0, 0)
extrude "Extrusion25" cut sketch "Sketch24" along normal blind 8.75
sketch "Sketch25" plane through (0, 226.7455, 0) normal (-1, 0, 0) x (0, 0, 1)
  line L0 (-16.4181, -226.7909) -> (20.5607, -226.7909) construction
  line L1 (17.0941, -211.1086) -> (17.0941, -226.7909)
  line L2 (17.0941, -226.7909) -> (-16.4181, -226.7909)
  line L3 (-16.4181, -226.7909) -> (36.2607, -226.7909) construction
  line L4 (-16.4181, -226.7909) -> (17.4356, -226.7909)
  line L5 (0, -226.7455) -> (0, -219.0797)
  line L6 (17.0941, -201.9506) -> (17.0941, -211.1086)
  line L7 (-36.0788, -226.7909) -> (-16.4181, -226.7909)
  line L8 (-6.0768, -213.6552) -> (5.8907, -213.6552) construction
  line L9 (-5.8898, -221.8359) -> (5.8898, -216.3235)
  line L10 (5.8898, -216.3235) -> (6.6273, -207.7608)
  line L11 (6.6273, -207.7608) -> (-12.9366, -216.9159)
  line L12 (-12.9366, -216.9159) -> (-5.8898, -221.8359)
  line L13 (-16.4181, -226.7909) -> (17.0941, -211.1086)
  line L14 (17.0941, -226.7909) -> (-16.4393, -226.7909)
  line L15 (-16.4393, -226.7909) -> (-16.4393, 228)
  line L16 (-16.4393, 228) -> (17.0941, 228)
  line L17 (17.0941, 228) -> (17.0941, -226.7909)
  point P0 (-16.4393, -226.7455)
  dimension "d155" = 37
  dimension "d221" = 60
  dimension "d222" = 60
  dimension "d223" = 7.443
  dimension "d232" = 21.6
  dimension "d233" = 13.0056
ref_plane "Work Plane14" through (0, 366.491, 0) normal (0, 1, 0) x (1, 0, 0)
ref_plane "Work Plane15" through (-168.2987, 4.1455, -7.5873) normal (0, -0.9063078, 0.4226183) x (1, 0, 0)
extrude "Extrusion36" cut sketch "Sketch25" along normal blind 236.5
sketch "Sketch35" plane through (-180.0822, 4.9096, -5.8898) normal (0, -0.9057349, 0.4238446) x (1, 0, 0)
  line L0 (180.0822, 3.2537) -> (65.0822, 3.2537)
  line L1 (65.0822, 3.2537) -> (65.0822, 21.0434)
  line L2 (65.0822, 21.0434) -> (-29.1113, 21.0434)
  line L3 (-29.1113, 21.0434) -> (-29.1113, -11.9566)
  line L4 (-29.1113, -11.9566) -> (65.0822, -11.9566)
  line L5 (65.0822, -11.9566) -> (65.0822, 3.2537)
  line L6 (65.0822, 3.2537) -> (66.0822, 3.2537)
  line L7 (66.0822, 3.2537) -> (66.0822, 21.0434)
  line L8 (66.0822, 21.0434) -> (65.0822, 21.0434)
  line L9 (65.0822, -11.9566) -> (66.0822, -11.9566)
  line L10 (66.0822, -11.9566) -> (66.0822, 3.2537)
  dimension "d226" = 115
  dimension "d234" = 1
extrude "Extrusion37" cut sketch "Sketch35" against normal blind 236.5
ref_plane "Work Plane8" through (0, 0, 0) normal (0, -1, 0) x (1, 0, 0)
properties part number "connector"
